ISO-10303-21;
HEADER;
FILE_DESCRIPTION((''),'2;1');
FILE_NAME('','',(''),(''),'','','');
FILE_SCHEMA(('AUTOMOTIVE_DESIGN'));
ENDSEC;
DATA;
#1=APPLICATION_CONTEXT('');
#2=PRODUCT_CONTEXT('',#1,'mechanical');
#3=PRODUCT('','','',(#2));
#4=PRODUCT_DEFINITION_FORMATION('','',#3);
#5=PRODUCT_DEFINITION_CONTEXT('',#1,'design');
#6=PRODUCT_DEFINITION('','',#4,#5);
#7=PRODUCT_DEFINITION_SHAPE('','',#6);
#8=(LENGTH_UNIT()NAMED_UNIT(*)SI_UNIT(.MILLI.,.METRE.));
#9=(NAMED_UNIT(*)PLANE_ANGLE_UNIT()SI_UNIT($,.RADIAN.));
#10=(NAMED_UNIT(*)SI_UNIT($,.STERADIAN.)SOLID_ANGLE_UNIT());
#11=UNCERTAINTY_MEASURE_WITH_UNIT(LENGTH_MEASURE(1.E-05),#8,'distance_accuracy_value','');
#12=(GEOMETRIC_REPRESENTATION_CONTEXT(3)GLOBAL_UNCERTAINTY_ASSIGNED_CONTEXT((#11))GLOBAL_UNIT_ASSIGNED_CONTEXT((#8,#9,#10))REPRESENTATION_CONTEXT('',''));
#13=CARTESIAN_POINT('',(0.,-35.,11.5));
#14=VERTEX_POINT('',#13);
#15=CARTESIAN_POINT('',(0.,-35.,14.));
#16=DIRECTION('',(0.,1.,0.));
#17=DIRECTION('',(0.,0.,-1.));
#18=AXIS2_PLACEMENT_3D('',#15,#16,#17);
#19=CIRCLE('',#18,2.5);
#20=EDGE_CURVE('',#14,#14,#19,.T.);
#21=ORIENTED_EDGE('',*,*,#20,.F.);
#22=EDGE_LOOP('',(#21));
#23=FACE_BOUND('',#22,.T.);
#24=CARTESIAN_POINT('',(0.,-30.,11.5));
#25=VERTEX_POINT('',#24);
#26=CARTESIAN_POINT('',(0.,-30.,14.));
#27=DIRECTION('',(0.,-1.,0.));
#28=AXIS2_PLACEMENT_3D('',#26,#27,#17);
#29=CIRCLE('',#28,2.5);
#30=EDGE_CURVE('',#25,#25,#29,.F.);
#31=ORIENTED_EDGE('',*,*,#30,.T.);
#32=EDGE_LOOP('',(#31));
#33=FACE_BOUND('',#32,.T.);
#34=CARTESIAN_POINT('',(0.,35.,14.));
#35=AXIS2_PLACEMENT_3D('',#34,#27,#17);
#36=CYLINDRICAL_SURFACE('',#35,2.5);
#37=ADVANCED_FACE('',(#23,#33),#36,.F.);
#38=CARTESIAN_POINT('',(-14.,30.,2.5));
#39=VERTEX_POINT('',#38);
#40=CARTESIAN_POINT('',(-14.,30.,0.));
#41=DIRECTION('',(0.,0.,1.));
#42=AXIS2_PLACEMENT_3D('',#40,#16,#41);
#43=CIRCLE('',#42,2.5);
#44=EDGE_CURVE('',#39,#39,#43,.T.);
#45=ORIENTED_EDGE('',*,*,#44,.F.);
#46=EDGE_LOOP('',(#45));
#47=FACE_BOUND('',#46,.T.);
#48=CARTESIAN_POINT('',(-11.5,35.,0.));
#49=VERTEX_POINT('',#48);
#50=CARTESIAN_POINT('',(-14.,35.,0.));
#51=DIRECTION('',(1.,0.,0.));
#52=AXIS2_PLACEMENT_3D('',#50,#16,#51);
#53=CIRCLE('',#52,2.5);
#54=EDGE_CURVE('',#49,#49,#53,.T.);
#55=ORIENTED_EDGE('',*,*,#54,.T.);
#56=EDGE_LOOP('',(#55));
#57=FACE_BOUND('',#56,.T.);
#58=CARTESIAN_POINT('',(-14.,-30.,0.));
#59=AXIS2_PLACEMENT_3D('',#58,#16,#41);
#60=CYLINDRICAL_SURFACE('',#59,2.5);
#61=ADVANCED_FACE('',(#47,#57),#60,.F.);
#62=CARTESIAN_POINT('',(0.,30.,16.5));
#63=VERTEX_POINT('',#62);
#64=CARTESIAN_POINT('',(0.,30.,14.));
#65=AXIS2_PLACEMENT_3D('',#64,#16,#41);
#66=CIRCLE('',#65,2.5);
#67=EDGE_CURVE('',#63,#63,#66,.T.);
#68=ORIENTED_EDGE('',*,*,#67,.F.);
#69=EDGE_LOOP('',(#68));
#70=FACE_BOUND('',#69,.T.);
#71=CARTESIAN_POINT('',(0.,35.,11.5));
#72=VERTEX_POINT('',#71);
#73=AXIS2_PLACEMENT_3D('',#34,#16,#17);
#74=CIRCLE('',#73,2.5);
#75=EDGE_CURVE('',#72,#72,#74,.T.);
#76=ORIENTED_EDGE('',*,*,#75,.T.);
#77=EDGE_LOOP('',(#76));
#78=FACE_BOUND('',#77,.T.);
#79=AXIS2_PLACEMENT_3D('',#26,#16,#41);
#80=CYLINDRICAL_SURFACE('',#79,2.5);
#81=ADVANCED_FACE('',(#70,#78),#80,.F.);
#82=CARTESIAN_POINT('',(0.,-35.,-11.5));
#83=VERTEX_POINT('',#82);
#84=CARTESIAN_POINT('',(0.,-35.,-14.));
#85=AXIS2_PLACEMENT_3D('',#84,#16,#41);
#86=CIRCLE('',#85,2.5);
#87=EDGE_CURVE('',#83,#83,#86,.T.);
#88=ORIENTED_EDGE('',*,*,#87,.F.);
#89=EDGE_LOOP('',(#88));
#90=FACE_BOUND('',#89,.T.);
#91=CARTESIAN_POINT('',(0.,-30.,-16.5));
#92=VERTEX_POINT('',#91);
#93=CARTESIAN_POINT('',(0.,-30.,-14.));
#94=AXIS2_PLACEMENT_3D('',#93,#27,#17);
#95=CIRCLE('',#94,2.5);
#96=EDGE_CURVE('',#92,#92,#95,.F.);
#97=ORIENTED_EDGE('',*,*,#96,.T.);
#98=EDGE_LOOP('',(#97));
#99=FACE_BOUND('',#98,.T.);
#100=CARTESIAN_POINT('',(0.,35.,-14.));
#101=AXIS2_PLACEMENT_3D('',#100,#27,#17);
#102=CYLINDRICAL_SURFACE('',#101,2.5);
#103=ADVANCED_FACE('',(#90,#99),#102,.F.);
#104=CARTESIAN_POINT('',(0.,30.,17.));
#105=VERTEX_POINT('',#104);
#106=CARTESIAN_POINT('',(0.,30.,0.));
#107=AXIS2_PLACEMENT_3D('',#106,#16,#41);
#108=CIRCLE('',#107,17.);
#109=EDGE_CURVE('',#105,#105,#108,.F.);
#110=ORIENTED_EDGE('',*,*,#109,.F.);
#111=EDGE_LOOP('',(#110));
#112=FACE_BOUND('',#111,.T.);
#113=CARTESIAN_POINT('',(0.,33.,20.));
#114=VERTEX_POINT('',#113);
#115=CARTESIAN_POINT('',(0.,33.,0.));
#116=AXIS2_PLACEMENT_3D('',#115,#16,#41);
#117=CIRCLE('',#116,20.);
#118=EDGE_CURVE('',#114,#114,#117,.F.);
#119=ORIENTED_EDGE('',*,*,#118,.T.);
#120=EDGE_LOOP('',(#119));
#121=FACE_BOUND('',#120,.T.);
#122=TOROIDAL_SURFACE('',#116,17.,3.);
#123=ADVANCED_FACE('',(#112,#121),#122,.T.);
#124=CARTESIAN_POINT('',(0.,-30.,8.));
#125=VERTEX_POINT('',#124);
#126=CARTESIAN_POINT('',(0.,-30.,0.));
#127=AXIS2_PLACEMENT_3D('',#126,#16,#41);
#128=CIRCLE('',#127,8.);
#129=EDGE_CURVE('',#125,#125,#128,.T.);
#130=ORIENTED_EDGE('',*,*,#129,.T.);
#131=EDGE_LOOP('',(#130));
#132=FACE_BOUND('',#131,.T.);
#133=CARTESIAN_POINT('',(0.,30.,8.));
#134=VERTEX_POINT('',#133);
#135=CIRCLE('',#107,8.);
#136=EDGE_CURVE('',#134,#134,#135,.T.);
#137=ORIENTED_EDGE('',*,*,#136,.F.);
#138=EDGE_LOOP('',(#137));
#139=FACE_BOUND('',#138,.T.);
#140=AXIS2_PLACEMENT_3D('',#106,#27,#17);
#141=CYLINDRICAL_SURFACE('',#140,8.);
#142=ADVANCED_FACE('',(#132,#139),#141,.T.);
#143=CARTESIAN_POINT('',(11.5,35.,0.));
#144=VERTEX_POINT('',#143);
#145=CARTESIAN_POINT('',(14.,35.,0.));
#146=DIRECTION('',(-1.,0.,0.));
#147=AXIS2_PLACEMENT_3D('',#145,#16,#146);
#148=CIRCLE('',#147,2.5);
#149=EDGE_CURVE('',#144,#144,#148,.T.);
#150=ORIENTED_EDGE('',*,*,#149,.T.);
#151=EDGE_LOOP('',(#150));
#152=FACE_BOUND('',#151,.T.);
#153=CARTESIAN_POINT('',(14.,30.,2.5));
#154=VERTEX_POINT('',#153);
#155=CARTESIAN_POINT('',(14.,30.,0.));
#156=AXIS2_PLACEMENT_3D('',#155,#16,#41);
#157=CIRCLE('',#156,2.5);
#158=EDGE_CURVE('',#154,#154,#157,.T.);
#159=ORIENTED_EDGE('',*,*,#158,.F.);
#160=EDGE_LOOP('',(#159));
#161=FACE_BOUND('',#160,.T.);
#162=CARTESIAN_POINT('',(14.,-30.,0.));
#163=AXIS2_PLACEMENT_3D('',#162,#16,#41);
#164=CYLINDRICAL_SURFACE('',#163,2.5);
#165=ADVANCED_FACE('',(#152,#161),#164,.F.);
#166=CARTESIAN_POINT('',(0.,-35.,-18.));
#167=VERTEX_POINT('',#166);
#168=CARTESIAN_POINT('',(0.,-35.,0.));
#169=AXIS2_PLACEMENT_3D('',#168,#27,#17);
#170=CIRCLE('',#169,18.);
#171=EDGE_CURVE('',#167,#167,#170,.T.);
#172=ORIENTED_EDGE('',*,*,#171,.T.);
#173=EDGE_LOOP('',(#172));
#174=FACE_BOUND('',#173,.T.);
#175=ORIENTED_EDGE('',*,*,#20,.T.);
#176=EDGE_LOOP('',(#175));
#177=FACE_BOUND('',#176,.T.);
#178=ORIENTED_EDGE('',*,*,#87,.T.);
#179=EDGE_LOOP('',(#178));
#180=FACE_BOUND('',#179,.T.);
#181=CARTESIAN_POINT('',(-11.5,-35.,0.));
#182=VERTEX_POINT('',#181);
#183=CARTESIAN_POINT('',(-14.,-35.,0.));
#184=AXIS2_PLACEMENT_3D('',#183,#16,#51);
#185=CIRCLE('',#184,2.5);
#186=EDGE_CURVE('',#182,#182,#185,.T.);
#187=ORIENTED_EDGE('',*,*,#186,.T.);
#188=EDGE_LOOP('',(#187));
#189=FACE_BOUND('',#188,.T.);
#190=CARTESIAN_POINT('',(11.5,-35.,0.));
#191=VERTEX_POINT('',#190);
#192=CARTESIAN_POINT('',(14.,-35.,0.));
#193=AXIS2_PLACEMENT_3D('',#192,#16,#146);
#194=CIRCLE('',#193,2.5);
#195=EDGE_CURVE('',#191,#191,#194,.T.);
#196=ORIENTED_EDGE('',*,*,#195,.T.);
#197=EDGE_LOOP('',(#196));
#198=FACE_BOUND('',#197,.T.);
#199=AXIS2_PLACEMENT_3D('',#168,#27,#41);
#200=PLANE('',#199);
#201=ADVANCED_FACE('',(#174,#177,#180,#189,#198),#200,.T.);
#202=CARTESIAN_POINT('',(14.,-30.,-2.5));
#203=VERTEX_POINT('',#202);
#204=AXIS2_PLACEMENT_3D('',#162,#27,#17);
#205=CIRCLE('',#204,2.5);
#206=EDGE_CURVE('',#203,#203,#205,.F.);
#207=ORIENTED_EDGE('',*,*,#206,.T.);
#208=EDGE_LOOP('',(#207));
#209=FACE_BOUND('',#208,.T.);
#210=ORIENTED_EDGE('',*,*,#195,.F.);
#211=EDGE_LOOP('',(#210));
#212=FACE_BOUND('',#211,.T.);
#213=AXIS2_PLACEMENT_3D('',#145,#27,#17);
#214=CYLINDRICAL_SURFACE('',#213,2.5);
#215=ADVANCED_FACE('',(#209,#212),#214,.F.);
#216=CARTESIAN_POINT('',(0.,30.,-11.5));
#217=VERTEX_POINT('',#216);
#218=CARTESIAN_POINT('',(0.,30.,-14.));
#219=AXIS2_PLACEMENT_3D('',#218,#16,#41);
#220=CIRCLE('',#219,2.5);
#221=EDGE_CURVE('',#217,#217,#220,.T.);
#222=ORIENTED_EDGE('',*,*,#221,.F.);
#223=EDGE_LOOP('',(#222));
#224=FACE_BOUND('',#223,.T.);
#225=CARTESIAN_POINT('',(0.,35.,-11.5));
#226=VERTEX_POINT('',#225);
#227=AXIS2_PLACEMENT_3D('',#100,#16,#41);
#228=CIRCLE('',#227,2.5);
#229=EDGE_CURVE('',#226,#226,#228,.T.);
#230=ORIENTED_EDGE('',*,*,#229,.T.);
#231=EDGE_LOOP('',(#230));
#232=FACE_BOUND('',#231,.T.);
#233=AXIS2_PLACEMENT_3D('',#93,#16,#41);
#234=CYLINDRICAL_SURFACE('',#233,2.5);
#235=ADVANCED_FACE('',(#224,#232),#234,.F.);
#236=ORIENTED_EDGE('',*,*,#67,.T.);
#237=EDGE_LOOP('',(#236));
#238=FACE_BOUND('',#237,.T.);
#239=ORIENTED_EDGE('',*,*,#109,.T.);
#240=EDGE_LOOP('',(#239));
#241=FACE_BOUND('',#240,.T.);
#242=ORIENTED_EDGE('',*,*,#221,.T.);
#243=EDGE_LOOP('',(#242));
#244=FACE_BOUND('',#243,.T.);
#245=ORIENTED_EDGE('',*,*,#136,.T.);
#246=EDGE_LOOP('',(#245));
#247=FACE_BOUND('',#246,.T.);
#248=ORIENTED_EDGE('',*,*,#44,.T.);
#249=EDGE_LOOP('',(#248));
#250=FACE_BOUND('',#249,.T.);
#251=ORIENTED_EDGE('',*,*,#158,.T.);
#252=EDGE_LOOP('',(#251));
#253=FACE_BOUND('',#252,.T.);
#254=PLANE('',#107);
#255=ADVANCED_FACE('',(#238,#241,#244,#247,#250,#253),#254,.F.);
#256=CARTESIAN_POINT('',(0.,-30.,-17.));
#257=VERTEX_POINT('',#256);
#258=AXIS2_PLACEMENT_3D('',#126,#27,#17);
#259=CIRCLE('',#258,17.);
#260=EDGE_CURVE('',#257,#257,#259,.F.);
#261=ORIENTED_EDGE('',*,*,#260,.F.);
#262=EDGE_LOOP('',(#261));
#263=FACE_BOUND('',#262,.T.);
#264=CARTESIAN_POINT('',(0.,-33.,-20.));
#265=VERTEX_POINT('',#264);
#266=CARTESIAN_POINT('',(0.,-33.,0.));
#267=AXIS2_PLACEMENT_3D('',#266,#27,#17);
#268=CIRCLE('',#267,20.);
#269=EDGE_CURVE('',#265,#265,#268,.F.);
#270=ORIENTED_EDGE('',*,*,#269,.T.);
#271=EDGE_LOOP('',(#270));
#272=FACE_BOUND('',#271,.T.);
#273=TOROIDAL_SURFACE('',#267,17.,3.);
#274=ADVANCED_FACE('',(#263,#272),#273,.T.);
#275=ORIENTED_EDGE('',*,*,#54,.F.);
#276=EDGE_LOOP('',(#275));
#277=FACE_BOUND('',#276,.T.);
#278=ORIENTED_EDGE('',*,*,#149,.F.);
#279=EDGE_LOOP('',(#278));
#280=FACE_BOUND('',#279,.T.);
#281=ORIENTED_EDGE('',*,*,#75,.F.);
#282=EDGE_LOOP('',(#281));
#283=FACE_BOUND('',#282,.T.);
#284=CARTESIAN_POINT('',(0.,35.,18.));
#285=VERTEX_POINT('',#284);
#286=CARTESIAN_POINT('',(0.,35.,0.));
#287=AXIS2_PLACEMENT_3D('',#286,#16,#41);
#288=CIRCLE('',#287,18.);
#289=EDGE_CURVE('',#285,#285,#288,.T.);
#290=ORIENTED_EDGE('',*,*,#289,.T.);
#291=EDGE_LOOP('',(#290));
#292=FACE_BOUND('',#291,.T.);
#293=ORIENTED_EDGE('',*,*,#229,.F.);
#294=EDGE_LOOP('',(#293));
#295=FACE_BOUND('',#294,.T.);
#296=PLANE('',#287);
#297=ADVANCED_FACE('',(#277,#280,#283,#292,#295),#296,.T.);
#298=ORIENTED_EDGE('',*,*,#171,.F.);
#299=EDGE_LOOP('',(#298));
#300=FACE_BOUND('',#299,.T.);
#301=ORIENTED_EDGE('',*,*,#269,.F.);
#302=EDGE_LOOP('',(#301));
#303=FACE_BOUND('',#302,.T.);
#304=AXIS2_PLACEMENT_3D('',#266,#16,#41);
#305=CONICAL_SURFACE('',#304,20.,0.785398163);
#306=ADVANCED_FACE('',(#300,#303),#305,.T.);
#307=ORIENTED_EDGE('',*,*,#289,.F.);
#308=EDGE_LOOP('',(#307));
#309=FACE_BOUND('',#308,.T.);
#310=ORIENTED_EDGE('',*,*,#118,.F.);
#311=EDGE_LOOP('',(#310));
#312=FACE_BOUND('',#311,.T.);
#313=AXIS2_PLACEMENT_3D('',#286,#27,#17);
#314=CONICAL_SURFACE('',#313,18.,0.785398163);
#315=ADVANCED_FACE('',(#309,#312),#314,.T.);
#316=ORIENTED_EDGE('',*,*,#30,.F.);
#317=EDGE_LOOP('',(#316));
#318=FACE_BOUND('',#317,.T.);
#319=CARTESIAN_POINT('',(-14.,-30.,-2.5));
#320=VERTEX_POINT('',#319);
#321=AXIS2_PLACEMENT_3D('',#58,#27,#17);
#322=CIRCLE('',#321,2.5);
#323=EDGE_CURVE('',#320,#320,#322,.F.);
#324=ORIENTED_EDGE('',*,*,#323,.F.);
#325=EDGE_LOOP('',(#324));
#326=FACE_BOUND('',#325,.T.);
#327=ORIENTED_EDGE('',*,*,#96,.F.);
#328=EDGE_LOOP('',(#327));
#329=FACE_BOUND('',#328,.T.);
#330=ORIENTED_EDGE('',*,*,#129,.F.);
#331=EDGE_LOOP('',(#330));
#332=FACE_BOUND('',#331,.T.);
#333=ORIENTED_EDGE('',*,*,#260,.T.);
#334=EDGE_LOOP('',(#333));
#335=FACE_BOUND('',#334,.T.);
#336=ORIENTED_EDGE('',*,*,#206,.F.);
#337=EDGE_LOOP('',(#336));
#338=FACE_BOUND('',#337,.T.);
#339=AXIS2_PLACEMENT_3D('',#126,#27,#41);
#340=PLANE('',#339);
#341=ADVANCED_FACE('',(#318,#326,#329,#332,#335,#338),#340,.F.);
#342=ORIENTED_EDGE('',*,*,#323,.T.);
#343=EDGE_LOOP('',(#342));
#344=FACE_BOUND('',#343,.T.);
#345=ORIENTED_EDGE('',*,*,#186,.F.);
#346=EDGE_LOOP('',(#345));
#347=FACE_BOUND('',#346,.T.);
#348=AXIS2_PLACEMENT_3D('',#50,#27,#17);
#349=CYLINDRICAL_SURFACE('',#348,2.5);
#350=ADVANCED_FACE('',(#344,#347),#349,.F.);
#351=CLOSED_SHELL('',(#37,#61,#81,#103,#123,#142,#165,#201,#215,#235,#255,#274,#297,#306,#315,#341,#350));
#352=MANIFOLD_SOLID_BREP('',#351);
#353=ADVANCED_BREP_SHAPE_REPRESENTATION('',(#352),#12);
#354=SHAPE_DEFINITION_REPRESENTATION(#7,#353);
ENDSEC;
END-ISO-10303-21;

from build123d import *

# Parameters (mm, degrees)
SKETCH1_R                = 8
BOSS_EXTRUDE1_DEPTH      = 30
SKETCH3_R                = 20
BOSS_EXTRUDE2_DEPTH      = 5
CHAMFER1_SIZE            = 2
SKETCH4_R                = 2.5
CUT_EXTRUDE1_DEPTH       = 71.887234394
CIRPATTERN1_COUNT        = 4
FILLET1_R                = 3
MIRROR1_COPY_1_SKETCH_R  = 2.5
MIRROR1_COPY_1_DEPTH     = 71.887234394
MIRROR1_COPY_2_SKETCH_R  = 2.5
MIRROR1_COPY_2_DEPTH     = 71.887234394
MIRROR1_COPY_3_SKETCH_R  = 2.5
MIRROR1_COPY_3_DEPTH     = 71.887234394
CHAMFER1_OF_MIRROR1_SIZE = 2
FILLET1_OF_MIRROR1_R     = 3


with BuildPart() as part:
    # Sketch1 → Boss-Extrude1 (new, symmetric)
    with BuildSketch(Plane(origin=(0, 0, 0), x_dir=(1, 0, 0), z_dir=(0, 1, 0))):
        with Locations(Location((0, 0, 0), (0, 0, 270))):
            Circle(SKETCH1_R)
    extrude(amount=BOSS_EXTRUDE1_DEPTH, both=True)

    # Sketch3 → Boss-Extrude2 (add)
    with BuildSketch(Plane(origin=(0, 30, 0), x_dir=(1, 0, 0), z_dir=(0, 1, 0))):
        with Locations(Location((0, 0, 0), (0, 0, 270))):
            Circle(SKETCH3_R)
    boss_extrude2 = extrude(amount=BOSS_EXTRUDE2_DEPTH)

    # Chamfer1
    chamfer1_edges = [part.edges().sort_by_distance(p)[0] for p in [
        (0, 35, -20),
    ]]
    chamfer(chamfer1_edges, length=CHAMFER1_SIZE)

    # Sketch4 → Cut-Extrude1 (cut, through all)
    with BuildSketch(Plane(origin=(0, 35, 0), x_dir=(1, 0, 0), z_dir=(0, 1, 0))):
        with Locations(Location((0, 14, 0), (0, 0, 270))):
            Circle(SKETCH4_R)
    cut_extrude1 = extrude(amount=-CUT_EXTRUDE1_DEPTH, mode=Mode.SUBTRACT)

    # CirPattern1: Cut-Extrude1 ×4 about axis
    cirpattern1_axis = Axis((0, 0, 0), (0, 1, 0))
    for i in range(1, CIRPATTERN1_COUNT):
        add(cut_extrude1.rotate(cirpattern1_axis, i * 360 / CIRPATTERN1_COUNT), mode=Mode.SUBTRACT)

    # Fillet1
    fillet1_edges = [part.edges().sort_by_distance(p)[0] for p in [
        (0, 30, -20),
    ]]
    fillet(fillet1_edges, radius=FILLET1_R - 0.0001)  # a hair under: the kernel refuses the full size

    # Mirror1: Boss-Extrude2, Cut-Extrude1 across plane
    add(boss_extrude2.mirror(Plane.ZX))
    add(cut_extrude1.mirror(Plane.ZX), mode=Mode.SUBTRACT)

    # Mirror1 copy 1 sketch → Mirror1 copy 1 (cut, through all)
    with BuildSketch(Plane(origin=(0, -35, 0), x_dir=(0, 0, -1), z_dir=(0, -1, 0))):
        with Locations((0, -14)):
            Circle(MIRROR1_COPY_1_SKETCH_R)
    extrude(amount=-MIRROR1_COPY_1_DEPTH, mode=Mode.SUBTRACT)

    # Mirror1 copy 2 sketch → Mirror1 copy 2 (cut, through all)
    with BuildSketch(Plane(origin=(0, -35, 0), x_dir=(-1, 0, 0), z_dir=(0, -1, 0))):
        with Locations((0, -14)):
            Circle(MIRROR1_COPY_2_SKETCH_R)
    extrude(amount=-MIRROR1_COPY_2_DEPTH, mode=Mode.SUBTRACT)

    # Mirror1 copy 3 sketch → Mirror1 copy 3 (cut, through all)
    with BuildSketch(Plane(origin=(0, -35, 0), x_dir=(0, 0, 1), z_dir=(0, -1, 0))):
        with Locations((0, -14)):
            Circle(MIRROR1_COPY_3_SKETCH_R)
    extrude(amount=-MIRROR1_COPY_3_DEPTH, mode=Mode.SUBTRACT)

    # Chamfer1 of Mirror1
    chamfer1_of_mirror1_edges = [part.edges().sort_by_distance(p)[0] for p in [
        (0, -35, -20),
    ]]
    chamfer(chamfer1_of_mirror1_edges, length=CHAMFER1_OF_MIRROR1_SIZE)

    # Fillet1 of Mirror1
    fillet1_of_mirror1_edges = [part.edges().sort_by_distance(p)[0] for p in [
        (0, -30, -20),
    ]]
    fillet(fillet1_of_mirror1_edges, radius=FILLET1_OF_MIRROR1_R - 0.0001)  # a hair under: the kernel refuses the full size


solid = part.part
